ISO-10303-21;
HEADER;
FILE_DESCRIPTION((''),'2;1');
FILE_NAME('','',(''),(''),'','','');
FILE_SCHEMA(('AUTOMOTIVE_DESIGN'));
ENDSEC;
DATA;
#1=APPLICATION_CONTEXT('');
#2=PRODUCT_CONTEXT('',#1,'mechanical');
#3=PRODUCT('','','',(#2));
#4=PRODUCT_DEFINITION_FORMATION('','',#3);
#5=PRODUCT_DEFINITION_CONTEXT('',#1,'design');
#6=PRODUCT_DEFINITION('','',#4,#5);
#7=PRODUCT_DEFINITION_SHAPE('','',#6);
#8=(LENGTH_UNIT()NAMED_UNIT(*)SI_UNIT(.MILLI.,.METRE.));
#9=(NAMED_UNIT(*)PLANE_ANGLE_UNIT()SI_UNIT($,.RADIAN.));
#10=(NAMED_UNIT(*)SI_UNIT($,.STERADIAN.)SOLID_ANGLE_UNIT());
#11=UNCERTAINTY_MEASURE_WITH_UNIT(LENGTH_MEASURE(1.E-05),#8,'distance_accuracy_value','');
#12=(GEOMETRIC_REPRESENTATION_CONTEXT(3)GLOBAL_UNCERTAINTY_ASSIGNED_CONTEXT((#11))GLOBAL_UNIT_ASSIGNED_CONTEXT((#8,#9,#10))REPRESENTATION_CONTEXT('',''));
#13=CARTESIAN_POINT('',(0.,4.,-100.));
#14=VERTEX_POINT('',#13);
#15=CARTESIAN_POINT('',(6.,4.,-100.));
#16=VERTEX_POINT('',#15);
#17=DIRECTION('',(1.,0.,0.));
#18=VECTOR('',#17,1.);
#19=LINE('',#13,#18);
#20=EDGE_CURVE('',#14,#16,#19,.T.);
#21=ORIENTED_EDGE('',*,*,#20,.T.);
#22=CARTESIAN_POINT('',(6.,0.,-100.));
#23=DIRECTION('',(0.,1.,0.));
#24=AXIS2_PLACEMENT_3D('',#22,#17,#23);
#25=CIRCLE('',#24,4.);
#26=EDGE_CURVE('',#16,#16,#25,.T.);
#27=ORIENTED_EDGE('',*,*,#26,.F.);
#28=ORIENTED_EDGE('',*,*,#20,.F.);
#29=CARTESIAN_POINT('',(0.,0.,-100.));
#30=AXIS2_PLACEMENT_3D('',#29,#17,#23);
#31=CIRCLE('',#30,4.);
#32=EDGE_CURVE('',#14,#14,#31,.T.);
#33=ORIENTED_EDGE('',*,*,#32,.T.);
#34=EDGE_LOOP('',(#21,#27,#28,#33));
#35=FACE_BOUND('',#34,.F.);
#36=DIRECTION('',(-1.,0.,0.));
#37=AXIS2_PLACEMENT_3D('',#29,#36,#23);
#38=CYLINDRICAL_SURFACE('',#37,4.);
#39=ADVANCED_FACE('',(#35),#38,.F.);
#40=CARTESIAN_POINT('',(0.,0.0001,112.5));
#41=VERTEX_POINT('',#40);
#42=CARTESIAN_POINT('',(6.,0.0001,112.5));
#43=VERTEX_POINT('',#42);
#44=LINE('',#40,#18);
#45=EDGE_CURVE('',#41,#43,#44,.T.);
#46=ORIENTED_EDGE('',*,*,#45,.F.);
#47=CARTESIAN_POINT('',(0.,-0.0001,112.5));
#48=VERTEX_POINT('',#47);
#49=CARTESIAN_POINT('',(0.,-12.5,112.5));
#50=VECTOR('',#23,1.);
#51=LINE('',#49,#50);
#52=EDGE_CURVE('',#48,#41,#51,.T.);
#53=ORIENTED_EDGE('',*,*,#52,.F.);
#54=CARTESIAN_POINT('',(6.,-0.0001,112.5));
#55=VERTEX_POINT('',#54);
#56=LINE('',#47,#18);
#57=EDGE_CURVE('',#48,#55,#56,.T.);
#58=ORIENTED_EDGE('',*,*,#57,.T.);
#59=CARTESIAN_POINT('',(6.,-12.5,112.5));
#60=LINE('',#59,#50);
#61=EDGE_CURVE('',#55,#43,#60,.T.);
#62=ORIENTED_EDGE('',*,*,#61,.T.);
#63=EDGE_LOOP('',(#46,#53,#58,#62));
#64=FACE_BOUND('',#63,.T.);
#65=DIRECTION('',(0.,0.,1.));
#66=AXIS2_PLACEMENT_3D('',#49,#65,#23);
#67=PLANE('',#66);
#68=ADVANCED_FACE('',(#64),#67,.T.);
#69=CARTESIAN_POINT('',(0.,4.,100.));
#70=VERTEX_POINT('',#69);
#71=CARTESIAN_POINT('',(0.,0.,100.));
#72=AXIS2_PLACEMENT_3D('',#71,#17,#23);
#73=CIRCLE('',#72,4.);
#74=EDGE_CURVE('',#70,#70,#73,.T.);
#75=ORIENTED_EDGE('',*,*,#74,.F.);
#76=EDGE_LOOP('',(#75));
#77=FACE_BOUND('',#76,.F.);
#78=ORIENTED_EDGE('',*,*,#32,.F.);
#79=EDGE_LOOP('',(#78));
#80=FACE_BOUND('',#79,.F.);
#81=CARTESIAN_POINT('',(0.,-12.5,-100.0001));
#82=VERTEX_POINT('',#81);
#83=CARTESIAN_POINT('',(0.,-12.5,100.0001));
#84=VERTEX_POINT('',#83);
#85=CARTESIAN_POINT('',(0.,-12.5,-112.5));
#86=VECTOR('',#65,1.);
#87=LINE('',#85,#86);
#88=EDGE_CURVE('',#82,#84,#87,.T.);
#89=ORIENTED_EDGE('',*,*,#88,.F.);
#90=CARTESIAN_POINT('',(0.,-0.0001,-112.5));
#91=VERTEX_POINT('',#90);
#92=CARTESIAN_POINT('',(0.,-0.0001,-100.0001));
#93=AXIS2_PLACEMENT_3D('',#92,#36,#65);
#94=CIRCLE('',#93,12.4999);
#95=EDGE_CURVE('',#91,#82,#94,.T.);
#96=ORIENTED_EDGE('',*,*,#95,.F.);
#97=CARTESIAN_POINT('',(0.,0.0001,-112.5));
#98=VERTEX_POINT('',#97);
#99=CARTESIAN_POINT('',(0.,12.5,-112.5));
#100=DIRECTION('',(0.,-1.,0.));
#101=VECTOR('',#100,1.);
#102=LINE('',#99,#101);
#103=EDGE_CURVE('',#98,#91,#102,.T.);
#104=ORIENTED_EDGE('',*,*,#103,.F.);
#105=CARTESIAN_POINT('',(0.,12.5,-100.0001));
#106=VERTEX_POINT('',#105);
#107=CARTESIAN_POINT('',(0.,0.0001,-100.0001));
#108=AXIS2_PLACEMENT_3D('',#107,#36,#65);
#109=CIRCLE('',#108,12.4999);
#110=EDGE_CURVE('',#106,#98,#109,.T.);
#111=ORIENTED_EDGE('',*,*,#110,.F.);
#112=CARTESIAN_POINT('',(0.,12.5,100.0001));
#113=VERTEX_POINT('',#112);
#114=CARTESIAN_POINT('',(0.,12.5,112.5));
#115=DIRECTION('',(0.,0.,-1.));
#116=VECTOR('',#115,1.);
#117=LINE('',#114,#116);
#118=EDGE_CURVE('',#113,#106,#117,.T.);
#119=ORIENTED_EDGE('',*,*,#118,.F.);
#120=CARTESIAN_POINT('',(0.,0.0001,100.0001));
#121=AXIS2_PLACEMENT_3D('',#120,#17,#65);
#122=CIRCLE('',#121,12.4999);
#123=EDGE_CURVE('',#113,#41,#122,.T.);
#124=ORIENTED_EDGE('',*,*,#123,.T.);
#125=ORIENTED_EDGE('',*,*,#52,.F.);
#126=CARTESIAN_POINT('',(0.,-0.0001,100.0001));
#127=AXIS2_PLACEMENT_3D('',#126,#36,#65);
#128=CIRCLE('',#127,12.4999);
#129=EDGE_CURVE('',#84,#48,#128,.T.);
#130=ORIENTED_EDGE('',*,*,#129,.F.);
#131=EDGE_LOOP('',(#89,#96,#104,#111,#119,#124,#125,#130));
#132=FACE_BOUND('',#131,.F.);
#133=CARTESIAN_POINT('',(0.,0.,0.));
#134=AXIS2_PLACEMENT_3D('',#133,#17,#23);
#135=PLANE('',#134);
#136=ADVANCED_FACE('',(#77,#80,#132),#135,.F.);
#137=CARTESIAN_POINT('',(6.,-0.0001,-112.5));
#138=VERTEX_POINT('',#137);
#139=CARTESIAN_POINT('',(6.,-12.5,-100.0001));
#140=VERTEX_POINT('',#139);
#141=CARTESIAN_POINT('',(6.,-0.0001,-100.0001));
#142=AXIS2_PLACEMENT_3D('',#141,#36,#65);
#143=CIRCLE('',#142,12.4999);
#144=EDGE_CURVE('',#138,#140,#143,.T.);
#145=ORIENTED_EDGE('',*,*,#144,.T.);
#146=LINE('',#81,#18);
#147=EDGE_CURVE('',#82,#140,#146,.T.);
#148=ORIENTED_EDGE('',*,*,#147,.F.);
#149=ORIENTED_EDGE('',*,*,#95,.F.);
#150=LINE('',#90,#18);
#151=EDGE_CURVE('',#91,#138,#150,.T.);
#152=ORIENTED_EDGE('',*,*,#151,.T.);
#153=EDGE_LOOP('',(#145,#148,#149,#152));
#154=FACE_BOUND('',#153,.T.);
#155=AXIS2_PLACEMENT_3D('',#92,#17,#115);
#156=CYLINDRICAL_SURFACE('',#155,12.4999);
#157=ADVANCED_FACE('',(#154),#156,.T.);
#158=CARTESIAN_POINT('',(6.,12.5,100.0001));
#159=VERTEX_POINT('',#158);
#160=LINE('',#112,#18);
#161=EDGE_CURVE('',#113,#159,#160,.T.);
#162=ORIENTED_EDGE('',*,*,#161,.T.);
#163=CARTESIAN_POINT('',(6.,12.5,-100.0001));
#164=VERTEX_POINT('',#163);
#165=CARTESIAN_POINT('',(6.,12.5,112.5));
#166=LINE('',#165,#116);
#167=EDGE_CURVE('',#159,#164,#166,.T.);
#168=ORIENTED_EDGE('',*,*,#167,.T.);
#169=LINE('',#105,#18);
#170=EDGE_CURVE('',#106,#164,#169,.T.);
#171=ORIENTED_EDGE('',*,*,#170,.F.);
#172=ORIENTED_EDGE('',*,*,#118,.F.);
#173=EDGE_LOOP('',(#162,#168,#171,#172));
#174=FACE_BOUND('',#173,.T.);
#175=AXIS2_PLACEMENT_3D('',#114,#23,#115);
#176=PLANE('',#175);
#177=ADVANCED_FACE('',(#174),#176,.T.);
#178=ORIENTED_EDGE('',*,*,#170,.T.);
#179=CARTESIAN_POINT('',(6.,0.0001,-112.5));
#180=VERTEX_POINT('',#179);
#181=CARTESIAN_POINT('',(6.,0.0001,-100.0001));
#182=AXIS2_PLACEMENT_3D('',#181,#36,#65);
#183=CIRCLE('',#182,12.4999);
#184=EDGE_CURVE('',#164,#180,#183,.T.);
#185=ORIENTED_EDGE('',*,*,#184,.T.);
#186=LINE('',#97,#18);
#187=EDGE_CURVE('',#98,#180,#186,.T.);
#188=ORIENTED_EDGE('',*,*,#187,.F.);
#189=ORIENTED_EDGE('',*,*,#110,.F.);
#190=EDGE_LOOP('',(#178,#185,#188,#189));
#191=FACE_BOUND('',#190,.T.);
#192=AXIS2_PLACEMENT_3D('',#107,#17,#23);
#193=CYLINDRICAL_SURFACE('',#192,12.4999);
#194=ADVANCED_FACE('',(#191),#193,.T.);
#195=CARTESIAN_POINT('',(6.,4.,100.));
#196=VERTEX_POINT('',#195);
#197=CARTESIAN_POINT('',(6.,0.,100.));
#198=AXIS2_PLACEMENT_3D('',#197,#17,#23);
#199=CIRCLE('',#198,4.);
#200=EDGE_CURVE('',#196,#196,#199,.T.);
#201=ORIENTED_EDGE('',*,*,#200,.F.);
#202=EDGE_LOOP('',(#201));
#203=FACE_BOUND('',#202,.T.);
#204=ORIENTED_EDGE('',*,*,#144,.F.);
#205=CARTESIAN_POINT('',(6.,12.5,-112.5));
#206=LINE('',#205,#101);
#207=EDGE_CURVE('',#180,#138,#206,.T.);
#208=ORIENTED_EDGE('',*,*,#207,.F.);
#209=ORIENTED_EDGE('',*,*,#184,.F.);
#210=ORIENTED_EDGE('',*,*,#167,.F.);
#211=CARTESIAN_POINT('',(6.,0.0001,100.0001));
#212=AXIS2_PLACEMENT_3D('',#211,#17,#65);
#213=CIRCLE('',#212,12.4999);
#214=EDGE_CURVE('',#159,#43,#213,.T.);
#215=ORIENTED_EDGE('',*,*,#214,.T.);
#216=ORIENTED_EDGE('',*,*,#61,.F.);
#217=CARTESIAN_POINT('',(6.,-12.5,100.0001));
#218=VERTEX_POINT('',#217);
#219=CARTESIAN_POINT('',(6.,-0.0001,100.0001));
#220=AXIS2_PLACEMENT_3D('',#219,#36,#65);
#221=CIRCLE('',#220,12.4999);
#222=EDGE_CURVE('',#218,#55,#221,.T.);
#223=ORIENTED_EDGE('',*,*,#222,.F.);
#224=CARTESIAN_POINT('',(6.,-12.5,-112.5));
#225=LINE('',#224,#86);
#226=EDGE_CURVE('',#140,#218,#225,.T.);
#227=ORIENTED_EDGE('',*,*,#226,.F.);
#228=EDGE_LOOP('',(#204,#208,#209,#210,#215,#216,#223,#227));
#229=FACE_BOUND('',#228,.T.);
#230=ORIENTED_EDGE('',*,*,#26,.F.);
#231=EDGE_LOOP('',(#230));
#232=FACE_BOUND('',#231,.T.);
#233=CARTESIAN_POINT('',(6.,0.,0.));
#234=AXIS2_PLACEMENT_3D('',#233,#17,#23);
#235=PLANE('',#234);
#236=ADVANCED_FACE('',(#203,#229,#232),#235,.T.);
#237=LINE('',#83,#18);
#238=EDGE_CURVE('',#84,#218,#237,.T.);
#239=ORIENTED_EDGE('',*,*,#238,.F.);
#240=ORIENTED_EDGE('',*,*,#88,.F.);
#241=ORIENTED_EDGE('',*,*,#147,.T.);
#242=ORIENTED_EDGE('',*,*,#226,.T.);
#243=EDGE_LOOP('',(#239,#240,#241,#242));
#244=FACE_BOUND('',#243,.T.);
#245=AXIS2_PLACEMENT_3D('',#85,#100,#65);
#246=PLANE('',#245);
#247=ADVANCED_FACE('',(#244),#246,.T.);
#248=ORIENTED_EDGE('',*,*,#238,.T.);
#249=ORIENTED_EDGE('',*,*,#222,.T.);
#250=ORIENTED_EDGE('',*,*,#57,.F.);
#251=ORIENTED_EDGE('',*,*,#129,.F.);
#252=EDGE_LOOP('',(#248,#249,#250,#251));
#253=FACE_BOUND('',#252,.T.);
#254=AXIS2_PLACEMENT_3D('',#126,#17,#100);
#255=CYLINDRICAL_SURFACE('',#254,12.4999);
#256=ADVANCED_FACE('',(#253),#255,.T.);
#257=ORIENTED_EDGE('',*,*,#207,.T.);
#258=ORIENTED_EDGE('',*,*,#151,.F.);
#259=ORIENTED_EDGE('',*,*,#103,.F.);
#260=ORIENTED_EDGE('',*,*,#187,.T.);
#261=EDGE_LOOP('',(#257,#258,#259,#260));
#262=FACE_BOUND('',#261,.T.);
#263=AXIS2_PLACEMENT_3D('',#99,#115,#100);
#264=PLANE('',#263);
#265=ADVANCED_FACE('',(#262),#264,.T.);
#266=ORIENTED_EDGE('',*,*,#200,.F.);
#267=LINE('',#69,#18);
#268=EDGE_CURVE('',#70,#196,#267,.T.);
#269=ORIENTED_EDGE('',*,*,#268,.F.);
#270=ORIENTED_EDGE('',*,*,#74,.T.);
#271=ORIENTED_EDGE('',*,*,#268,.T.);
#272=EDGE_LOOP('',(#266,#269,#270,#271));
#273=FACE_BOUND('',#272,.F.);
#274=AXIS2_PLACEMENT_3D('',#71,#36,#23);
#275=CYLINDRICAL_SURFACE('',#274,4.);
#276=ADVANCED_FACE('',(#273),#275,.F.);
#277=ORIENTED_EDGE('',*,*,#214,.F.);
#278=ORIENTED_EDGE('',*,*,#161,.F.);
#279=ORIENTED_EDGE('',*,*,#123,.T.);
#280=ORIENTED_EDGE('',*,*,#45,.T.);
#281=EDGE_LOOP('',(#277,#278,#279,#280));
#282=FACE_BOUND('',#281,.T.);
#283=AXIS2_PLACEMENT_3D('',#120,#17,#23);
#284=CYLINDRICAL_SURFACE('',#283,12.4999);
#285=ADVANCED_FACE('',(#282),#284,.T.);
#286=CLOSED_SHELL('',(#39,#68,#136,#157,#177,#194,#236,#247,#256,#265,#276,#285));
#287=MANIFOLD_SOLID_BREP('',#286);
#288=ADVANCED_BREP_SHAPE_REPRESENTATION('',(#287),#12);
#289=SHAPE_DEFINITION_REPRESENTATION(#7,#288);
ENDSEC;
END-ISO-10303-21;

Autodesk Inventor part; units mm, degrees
ref_plane "YZ Plane" through (0, 0, 0) normal (1, 0, 0) x (0, 1, 0)
ref_plane "XZ Plane" through (0, 0, 0) normal (0, 1, 0) x (-1, 0, 0)
ref_plane "XY Plane" through (0, 0, 0) normal (0, 0, 1) x (1, 0, 0)
sketch "Sketch1" plane through (0, 0, 0) normal (1, 0, 0) x (0, 1, 0)
  line L0 (12.5, 112.5) -> (12.5, -112.5)
  line L1 (12.5, -112.5) -> (-12.5, -112.5)
  line L2 (-12.5, -112.5) -> (-12.5, 112.5)
  line L3 (-12.5, 112.5) -> (12.5, 112.5)
  circle A0 centre (0, 100) radius 4
  circle A1 centre (0, -100) radius 4
  point P0 (0, 0)
  point P1 (-12.5, 94)
  point P2 (-12.5, 97.9432)
  dimension "d0" = 225
  dimension "d1" = 25
  dimension "d2" = 12.5
  dimension "d3" = 112.5
  dimension "d4" = 8
  dimension "d5" = 12.5
  dimension "d6" = 8
  dimension "d7" = 12.5
extrude "Extrusion1" add sketch "Sketch1" along normal blind 6
full round fillet "Full Round Fillet1" first side at (2, 12.5, -37.5) centre faces at (2, 4.1667, 112.5) second side at (2, -12.5, 37.5)
full round fillet "Full Round Fillet2" first side at (2, 12.5, -41.6666) centre faces at (2, -4.1667, -112.5) second side at (2, -12.5, 29.1667)
thread "Thread3" size "M8x1.25" class "6H" standard "ANSI Metric M Profile" length 350
thread "Thread4" size "M8x1.25" class "6H" standard "ANSI Metric M Profile" length 350
properties part number "Braço Macaco" material "Steel AISI 1050"
